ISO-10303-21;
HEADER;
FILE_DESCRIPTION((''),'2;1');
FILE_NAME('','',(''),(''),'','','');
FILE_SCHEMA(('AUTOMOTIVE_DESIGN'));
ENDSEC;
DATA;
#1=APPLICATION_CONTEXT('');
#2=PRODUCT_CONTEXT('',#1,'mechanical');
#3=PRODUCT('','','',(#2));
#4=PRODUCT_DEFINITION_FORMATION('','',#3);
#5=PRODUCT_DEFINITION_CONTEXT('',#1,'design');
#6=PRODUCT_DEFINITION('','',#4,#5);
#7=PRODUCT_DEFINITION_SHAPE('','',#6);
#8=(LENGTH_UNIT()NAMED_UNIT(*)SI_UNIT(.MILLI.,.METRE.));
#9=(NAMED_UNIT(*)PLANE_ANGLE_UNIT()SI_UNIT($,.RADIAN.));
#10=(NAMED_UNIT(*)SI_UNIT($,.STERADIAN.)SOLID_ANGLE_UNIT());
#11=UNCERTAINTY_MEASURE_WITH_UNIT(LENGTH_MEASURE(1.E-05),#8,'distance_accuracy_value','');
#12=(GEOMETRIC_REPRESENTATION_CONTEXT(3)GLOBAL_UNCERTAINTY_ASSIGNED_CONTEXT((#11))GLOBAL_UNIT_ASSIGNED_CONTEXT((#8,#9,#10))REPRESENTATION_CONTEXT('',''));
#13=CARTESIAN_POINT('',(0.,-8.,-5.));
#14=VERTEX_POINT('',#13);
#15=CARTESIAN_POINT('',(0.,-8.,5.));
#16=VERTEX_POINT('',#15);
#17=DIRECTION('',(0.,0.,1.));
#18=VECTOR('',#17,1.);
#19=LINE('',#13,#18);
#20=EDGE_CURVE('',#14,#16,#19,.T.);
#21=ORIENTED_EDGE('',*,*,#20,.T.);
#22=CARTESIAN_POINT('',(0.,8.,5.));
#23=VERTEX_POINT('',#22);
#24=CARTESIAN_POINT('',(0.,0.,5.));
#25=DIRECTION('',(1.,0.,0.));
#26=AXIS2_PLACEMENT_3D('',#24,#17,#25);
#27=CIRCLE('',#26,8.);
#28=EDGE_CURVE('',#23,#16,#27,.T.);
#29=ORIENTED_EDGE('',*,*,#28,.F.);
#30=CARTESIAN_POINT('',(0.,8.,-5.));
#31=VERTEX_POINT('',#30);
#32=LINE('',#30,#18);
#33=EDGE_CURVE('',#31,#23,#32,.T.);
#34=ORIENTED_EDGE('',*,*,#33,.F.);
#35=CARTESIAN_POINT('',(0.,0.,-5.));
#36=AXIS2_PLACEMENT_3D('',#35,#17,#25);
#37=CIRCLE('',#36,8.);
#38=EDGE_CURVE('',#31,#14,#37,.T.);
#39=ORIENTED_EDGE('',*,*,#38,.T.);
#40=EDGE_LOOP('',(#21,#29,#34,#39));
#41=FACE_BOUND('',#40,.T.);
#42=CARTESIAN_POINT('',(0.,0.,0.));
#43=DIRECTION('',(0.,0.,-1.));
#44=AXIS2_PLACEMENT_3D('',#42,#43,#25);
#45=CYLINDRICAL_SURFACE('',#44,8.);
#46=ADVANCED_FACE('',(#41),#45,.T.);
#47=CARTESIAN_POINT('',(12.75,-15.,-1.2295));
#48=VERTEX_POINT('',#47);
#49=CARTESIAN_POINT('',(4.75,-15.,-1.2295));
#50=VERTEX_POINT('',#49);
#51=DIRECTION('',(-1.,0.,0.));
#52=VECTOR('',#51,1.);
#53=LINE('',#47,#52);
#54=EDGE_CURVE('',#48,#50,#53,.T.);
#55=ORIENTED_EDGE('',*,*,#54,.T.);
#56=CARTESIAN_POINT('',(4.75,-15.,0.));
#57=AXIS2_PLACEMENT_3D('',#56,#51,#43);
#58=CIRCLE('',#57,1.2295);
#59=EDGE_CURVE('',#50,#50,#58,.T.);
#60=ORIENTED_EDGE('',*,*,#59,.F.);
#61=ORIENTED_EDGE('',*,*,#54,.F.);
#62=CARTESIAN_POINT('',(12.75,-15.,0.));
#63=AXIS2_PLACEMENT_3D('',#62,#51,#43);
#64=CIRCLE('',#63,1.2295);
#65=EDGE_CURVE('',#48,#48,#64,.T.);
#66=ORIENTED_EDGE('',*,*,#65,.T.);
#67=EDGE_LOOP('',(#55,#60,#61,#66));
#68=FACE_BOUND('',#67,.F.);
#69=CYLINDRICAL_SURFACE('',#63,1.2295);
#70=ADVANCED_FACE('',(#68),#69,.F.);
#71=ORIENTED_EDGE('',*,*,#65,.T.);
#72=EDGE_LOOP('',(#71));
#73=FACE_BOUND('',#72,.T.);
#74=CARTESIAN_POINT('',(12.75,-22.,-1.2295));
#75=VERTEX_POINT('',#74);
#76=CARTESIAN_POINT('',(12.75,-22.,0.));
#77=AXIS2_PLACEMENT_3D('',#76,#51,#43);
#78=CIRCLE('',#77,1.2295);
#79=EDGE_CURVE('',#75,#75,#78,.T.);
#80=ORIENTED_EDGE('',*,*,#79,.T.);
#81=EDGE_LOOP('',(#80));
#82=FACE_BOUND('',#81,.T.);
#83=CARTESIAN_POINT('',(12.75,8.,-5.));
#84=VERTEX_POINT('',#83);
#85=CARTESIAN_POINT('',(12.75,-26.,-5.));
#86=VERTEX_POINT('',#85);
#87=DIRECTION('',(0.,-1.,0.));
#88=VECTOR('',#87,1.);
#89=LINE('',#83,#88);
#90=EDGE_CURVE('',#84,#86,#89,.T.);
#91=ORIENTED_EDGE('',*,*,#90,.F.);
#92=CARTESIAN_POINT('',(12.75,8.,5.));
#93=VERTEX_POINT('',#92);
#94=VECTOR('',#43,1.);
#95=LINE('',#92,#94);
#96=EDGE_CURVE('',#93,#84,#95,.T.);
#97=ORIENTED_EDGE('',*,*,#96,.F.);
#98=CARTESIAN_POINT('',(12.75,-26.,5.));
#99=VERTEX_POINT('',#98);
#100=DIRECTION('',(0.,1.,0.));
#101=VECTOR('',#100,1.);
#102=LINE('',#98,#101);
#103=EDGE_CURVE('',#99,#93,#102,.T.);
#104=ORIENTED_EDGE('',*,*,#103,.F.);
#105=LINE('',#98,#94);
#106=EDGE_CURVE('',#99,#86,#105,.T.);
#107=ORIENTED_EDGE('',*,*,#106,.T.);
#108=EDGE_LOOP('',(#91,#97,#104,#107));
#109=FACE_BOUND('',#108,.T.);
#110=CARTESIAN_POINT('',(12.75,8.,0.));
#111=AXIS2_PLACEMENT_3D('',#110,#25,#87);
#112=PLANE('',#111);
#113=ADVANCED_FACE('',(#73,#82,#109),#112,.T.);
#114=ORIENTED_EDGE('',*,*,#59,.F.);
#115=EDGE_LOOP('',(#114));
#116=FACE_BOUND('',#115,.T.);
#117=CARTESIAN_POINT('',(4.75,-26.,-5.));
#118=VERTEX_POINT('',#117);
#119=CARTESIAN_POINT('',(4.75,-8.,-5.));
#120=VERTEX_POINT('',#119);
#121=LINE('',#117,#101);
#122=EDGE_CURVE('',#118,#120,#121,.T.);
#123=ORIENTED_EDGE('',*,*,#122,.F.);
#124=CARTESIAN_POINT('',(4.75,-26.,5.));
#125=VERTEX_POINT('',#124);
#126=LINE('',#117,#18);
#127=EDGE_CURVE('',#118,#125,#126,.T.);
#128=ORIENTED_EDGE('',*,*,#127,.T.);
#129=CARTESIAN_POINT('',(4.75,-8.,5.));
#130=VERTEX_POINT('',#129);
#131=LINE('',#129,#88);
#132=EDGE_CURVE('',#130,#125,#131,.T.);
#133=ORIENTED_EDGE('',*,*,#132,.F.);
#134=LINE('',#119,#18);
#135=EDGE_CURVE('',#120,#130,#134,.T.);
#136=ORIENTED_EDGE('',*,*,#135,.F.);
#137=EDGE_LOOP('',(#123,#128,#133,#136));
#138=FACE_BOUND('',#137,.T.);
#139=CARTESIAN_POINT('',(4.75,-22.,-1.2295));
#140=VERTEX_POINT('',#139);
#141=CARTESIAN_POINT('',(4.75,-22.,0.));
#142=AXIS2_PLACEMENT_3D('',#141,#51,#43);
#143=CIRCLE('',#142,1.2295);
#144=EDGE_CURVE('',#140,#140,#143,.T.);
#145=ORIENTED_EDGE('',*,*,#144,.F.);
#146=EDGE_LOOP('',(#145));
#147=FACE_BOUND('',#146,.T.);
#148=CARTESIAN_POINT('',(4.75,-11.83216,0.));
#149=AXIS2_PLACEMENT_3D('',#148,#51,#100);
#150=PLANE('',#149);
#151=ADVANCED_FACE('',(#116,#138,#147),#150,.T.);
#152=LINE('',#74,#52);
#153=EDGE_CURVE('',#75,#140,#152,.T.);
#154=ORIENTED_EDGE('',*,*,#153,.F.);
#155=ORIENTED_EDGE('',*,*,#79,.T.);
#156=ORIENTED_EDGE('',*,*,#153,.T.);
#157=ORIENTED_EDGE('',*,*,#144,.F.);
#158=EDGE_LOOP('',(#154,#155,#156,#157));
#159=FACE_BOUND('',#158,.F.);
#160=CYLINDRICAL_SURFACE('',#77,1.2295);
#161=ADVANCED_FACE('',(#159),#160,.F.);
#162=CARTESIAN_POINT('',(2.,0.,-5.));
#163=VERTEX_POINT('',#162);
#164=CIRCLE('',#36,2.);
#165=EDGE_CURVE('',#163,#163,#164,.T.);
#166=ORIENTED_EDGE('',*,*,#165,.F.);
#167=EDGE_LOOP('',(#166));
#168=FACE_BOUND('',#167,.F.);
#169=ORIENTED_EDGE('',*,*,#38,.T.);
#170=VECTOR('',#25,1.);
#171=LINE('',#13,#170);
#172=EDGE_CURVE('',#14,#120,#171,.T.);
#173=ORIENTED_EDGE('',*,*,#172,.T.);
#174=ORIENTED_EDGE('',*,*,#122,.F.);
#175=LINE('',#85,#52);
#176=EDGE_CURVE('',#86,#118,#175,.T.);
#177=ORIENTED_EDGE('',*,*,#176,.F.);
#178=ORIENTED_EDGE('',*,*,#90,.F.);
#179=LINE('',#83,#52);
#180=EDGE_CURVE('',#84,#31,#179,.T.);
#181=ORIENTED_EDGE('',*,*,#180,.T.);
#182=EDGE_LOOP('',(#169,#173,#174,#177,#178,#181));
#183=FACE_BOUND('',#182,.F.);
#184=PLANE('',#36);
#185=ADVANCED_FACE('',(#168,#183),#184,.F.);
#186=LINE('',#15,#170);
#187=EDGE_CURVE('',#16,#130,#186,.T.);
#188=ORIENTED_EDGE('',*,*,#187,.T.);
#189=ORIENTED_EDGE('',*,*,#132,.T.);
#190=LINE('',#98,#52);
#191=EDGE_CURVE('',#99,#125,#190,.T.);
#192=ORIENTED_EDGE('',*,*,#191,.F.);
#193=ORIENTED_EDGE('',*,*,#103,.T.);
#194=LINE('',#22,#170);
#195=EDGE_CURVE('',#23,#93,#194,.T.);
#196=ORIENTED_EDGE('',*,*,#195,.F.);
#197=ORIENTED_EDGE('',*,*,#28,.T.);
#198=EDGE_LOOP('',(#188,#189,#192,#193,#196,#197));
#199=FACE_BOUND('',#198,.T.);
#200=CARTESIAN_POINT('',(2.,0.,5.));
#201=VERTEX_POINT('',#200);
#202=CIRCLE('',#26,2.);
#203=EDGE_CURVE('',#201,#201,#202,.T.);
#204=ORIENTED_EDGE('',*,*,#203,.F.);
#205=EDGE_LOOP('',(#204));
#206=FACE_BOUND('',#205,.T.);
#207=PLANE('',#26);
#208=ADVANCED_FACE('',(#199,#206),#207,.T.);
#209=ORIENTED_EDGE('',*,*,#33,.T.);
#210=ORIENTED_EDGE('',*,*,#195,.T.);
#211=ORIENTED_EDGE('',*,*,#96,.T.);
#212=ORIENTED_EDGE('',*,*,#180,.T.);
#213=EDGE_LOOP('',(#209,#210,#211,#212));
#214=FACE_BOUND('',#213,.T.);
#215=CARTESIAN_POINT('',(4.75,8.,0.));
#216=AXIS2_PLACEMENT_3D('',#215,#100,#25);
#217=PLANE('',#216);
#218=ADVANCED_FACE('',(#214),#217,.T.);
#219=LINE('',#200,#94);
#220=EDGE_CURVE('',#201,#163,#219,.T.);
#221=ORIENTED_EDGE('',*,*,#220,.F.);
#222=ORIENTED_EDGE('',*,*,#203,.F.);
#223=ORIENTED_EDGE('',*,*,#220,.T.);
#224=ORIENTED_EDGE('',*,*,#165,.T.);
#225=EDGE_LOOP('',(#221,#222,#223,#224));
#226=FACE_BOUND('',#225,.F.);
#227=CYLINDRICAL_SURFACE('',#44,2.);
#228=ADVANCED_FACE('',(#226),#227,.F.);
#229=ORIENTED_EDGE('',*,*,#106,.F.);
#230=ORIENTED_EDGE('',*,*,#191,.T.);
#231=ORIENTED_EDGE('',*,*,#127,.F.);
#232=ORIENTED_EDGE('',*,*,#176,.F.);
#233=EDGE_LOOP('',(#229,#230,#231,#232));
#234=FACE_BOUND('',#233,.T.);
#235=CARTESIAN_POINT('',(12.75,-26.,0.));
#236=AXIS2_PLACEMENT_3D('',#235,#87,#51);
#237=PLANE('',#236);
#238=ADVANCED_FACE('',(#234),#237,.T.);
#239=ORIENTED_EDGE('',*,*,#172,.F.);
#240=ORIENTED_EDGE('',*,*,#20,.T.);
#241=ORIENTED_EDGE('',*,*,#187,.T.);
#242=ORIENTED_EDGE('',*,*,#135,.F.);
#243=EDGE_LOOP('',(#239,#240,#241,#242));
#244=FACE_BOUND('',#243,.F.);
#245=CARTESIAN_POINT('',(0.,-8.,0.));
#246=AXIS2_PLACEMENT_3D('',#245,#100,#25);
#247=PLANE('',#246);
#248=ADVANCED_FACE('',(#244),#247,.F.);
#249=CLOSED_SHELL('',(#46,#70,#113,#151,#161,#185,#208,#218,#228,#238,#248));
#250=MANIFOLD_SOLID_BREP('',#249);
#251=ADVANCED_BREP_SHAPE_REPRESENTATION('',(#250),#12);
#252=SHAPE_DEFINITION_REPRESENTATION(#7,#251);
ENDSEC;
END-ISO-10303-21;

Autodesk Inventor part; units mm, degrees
ref_plane "YZ Plane" through (0, 0, 0) normal (1, 0, 0) x (0, 1, 0)
ref_plane "XZ Plane" through (0, 0, 0) normal (0, 1, 0) x (-1, 0, 0)
ref_plane "XY Plane" through (0, 0, 0) normal (0, 0, 1) x (1, 0, 0)
sketch "Sketch3" plane through (0, 0, 0) normal (0, 0, 1) x (1, 0, 0)
  circle A0 centre (0, 0) radius 2
  line L0 (0, 0) -> (12.75, 0)
  line L1 (12.75, 0) -> (12.75, -26)
  line L2 (12.75, -26) -> (4.75, -26)
  line L3 (4.75, -26) -> (4.75, -16)
  circle A1 centre (0, 0) radius 12.75
  line L4 (4.75, -16) -> (4.75, 8)
  line L5 (4.75, 8) -> (12.75, 8)
  line L6 (12.75, 8) -> (12.75, 0)
  circle A2 centre (0, 0) radius 8
  line L7 (0, -8) -> (4.75, -8)
  line L8 (0, 8) -> (4.75, 8)
  dimension "d29" = 4
  dimension "d30" = 12.75
  dimension "d31" = 26
  dimension "d32" = 8
  dimension "d33" = 10
  dimension "d34" = 8
extrude "Extrusion2" add sketch "Sketch3" along normal mid plane 10 contours A2 L4 L5 A1 L0 | A2 L4 L0 | L0 L4 A2 | L0 A1 L4 A2 | L1 L2 L3 L4 A1 | A1 L5 L6 | L4 A2 | A2 L8 L4 | L4 L7 A2
sketch "Sketch4" plane through (12.75, -26, 5) normal (1, 0, 0) x (0, 0, -1)
  line L0 (10, 0) -> (0, 0) projected
  point P0 (5, 26)
  point P1 (5, 4)
  point P2 (5, 11)
  dimension "d37" = 7
  dimension "d38" = 4
hole "Hole2" at (12.75, -22, 0) at (12.75, -15, 0) direction (-1, 0, 0) diameter 2.459 end through all thread size "M3x0.5" class "6H" standard "ISO Metric profile"
properties part number "CHUCKLENGAN"
